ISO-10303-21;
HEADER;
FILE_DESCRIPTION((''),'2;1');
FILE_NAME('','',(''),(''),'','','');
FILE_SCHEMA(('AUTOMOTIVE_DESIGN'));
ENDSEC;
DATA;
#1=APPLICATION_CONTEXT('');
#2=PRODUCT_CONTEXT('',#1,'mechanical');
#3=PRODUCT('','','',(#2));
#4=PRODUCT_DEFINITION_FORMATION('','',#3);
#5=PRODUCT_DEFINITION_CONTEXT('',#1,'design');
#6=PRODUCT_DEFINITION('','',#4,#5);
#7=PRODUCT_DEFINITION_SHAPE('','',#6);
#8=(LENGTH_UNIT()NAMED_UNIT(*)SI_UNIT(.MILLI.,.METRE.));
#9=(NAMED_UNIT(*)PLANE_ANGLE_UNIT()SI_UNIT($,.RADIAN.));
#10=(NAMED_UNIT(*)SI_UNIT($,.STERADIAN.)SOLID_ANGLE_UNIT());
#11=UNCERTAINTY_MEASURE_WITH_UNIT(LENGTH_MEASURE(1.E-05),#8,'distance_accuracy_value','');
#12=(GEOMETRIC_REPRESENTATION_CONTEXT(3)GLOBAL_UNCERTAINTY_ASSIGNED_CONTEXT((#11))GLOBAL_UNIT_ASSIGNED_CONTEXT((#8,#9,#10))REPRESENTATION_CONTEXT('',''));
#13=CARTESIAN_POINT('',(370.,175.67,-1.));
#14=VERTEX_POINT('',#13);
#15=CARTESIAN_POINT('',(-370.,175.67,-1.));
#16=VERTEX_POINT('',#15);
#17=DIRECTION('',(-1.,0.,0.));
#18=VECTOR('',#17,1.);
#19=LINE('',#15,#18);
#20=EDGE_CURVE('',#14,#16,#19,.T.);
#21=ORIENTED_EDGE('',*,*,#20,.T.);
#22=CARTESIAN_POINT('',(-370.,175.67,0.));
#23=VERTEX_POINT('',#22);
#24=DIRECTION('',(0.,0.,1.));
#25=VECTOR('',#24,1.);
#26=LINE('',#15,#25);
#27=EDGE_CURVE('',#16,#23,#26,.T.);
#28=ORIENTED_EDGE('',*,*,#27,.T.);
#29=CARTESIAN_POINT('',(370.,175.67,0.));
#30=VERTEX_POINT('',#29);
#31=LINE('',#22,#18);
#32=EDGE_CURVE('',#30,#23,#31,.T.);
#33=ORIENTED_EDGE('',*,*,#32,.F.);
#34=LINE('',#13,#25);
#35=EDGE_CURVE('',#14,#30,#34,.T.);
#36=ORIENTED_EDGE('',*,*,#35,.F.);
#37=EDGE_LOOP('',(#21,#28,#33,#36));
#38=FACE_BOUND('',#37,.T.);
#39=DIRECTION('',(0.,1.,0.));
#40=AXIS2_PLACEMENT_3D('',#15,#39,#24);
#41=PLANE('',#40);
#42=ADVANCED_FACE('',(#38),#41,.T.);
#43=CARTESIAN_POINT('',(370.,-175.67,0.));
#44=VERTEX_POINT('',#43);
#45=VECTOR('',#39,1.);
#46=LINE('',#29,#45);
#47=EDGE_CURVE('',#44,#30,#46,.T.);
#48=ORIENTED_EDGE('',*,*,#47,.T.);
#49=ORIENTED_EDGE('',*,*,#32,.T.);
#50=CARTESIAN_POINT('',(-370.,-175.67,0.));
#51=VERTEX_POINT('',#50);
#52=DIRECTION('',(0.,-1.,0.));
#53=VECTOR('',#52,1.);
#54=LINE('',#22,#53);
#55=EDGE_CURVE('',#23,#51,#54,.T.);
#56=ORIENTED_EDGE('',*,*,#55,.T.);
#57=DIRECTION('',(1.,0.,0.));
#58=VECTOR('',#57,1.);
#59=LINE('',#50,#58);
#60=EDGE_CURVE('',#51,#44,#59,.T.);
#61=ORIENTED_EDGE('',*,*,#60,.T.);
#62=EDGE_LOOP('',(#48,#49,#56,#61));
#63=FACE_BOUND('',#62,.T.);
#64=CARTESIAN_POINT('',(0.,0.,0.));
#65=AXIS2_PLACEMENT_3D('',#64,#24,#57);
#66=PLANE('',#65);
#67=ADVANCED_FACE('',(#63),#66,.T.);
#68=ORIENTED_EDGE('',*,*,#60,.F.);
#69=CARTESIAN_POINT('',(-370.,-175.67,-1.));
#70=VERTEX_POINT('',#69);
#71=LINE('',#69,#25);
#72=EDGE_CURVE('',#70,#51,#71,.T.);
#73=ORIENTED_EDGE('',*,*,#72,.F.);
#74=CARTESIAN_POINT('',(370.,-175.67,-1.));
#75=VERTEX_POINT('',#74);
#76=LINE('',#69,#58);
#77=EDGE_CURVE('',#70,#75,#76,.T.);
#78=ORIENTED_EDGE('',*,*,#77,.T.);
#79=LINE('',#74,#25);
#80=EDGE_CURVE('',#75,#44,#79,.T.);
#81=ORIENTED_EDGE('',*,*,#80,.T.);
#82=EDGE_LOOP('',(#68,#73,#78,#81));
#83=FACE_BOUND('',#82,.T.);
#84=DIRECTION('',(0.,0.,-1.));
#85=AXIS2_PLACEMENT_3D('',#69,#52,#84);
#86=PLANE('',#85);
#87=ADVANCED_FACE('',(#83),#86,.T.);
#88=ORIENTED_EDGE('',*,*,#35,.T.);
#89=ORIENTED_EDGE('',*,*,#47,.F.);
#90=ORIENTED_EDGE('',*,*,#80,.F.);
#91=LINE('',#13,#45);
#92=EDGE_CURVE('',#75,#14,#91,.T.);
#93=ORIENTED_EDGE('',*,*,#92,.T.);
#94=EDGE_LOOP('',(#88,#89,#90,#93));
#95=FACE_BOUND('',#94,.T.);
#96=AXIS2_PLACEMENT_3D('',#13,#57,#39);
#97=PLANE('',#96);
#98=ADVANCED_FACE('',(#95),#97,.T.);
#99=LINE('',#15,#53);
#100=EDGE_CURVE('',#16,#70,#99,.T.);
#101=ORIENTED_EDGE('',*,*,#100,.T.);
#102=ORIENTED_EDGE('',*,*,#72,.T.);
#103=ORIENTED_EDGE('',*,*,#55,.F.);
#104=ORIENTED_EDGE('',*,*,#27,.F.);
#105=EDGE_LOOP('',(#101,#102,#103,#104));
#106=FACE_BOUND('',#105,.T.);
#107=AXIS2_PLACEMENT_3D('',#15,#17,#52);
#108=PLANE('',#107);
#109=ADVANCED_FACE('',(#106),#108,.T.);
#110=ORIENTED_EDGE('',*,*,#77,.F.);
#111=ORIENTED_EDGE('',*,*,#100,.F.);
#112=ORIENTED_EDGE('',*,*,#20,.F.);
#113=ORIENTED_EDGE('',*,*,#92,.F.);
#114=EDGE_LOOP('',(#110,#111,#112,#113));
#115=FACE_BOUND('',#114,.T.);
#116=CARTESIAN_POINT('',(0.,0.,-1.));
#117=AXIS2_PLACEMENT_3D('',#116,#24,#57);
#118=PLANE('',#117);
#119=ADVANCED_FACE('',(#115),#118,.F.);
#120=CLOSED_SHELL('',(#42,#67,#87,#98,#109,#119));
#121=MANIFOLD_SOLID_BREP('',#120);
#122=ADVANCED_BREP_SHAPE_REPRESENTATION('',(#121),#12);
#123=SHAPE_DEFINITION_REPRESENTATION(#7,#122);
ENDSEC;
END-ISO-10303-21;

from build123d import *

# Parameters (mm, degrees)
SKETCH1_W             = 740
SKETCH1_H             = 351.34
BOTTOM_FIREWALL_DEPTH = 1


# Sheet-metal steps are written as plain solids
with BuildPart() as part:
    # Sketch1 → Bottom Firewall (new body)
    with BuildSketch(Plane.XY):
        Rectangle(SKETCH1_W, SKETCH1_H)
    extrude(amount=-BOTTOM_FIREWALL_DEPTH)


solid = part.part
